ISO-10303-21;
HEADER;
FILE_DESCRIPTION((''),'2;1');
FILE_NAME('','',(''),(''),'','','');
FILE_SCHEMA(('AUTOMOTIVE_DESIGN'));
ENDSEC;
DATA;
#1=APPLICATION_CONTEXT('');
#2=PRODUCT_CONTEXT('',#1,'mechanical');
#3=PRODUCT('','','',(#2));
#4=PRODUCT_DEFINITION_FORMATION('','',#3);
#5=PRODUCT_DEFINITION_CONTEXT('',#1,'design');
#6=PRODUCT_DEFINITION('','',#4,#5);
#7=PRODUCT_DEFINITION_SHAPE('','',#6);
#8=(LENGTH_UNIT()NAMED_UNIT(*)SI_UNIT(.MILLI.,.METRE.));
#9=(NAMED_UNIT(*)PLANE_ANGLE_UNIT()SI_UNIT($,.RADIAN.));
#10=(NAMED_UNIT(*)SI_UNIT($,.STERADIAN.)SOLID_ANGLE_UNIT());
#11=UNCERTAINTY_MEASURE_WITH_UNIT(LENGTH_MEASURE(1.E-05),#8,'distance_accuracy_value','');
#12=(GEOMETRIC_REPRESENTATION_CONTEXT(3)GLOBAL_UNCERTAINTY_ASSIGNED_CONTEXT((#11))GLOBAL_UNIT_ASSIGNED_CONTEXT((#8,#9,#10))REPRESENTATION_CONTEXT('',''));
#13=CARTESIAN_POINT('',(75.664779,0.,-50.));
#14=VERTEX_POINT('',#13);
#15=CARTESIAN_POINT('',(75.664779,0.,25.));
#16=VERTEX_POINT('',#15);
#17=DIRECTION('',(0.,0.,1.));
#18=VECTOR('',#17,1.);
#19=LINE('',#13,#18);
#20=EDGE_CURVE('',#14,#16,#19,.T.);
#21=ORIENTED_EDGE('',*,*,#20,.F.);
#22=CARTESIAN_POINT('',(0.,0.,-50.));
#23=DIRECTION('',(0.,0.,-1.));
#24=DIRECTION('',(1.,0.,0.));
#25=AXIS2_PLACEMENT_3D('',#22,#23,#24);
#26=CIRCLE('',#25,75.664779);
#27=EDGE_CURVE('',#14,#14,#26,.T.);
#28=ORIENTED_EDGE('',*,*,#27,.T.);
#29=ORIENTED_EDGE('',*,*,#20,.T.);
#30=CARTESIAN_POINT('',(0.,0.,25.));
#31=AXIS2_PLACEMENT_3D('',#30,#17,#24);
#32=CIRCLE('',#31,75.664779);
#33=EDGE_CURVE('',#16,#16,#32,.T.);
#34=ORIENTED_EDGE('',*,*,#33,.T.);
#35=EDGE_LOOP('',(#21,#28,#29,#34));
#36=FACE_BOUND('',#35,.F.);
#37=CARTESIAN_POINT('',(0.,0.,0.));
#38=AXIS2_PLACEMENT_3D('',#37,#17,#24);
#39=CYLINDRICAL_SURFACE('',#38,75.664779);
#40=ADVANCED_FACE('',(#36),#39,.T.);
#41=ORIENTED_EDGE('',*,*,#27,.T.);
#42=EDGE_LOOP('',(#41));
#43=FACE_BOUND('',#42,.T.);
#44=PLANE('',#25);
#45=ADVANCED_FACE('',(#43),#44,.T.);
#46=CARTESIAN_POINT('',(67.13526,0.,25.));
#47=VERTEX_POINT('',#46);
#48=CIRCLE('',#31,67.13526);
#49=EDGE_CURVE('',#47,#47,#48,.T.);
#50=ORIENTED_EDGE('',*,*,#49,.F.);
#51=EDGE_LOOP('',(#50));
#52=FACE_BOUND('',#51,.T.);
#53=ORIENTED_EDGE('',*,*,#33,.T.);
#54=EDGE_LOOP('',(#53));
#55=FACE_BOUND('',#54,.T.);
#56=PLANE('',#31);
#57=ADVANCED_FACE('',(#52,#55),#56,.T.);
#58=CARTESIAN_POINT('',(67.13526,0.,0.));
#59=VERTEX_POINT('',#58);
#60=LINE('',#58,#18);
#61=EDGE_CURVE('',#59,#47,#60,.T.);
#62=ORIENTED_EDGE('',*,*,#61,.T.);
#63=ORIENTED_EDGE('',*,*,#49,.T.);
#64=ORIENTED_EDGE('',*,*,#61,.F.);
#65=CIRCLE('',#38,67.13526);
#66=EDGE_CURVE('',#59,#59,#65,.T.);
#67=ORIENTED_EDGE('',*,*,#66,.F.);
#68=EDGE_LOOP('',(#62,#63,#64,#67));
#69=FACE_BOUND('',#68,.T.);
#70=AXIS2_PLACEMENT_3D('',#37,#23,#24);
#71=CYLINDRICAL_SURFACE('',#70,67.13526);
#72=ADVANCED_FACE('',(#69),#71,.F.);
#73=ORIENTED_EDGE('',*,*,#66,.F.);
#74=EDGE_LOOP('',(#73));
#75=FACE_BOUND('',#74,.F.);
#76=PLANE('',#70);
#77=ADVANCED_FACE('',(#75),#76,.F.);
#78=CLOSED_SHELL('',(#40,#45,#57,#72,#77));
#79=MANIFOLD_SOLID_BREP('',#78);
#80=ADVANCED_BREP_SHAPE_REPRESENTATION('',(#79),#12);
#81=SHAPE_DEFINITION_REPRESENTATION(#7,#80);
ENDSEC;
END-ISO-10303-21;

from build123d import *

# Parameters (mm, degrees)
F0_R         = 75.6647788215
F0_R_2       = 67.1352595914
F1_DEPTH     = 25
F2_DEPTH     = 25
F1_FACE_R    = 75.6647788215
F1_FACE_R_2  = 67.1352595914
F1_FACE1_R   = 75.6647788215
F1_FACE1_R_2 = 67.1352595914
F3_R         = 75.5867204447
F3_R_2       = 67.1352595914
F4_DEPTH     = 50


with BuildPart() as f1:
    # F0 (on Top) → F1 (new body)
    with BuildSketch(Plane.XY):
        Circle(F0_R)
        Circle(F0_R_2, mode=Mode.SUBTRACT)
    extrude(amount=F1_DEPTH)

    # F0 (on Top) → F2 (join)
    with BuildSketch(Plane.XY):
        Circle(F0_R)
        Circle(F0_R_2, mode=Mode.SUBTRACT)
    extrude(amount=F2_DEPTH)

    # F1_face (on face) + F1_face1 (on face) + F3 (on face) → F4 (join)
    with BuildSketch(Plane(origin=(0, 0, 0), x_dir=(1, 0, 0), z_dir=(0, 0, -1))):
        Circle(F1_FACE_R)
        Circle(F1_FACE_R_2, mode=Mode.SUBTRACT)
    with BuildSketch(Plane.XY.offset(25)):
        Circle(F1_FACE1_R)
        Circle(F1_FACE1_R_2, mode=Mode.SUBTRACT)
    with BuildSketch(Plane(origin=(0, 0, 0), x_dir=(1, 0, 0), z_dir=(0, 0, -1))):
        Circle(F3_R)
        Circle(F3_R_2, mode=Mode.SUBTRACT)
        Circle(F3_R_2)
    extrude(amount=F4_DEPTH, dir=(0, 0, -1))


solid = f1.part
